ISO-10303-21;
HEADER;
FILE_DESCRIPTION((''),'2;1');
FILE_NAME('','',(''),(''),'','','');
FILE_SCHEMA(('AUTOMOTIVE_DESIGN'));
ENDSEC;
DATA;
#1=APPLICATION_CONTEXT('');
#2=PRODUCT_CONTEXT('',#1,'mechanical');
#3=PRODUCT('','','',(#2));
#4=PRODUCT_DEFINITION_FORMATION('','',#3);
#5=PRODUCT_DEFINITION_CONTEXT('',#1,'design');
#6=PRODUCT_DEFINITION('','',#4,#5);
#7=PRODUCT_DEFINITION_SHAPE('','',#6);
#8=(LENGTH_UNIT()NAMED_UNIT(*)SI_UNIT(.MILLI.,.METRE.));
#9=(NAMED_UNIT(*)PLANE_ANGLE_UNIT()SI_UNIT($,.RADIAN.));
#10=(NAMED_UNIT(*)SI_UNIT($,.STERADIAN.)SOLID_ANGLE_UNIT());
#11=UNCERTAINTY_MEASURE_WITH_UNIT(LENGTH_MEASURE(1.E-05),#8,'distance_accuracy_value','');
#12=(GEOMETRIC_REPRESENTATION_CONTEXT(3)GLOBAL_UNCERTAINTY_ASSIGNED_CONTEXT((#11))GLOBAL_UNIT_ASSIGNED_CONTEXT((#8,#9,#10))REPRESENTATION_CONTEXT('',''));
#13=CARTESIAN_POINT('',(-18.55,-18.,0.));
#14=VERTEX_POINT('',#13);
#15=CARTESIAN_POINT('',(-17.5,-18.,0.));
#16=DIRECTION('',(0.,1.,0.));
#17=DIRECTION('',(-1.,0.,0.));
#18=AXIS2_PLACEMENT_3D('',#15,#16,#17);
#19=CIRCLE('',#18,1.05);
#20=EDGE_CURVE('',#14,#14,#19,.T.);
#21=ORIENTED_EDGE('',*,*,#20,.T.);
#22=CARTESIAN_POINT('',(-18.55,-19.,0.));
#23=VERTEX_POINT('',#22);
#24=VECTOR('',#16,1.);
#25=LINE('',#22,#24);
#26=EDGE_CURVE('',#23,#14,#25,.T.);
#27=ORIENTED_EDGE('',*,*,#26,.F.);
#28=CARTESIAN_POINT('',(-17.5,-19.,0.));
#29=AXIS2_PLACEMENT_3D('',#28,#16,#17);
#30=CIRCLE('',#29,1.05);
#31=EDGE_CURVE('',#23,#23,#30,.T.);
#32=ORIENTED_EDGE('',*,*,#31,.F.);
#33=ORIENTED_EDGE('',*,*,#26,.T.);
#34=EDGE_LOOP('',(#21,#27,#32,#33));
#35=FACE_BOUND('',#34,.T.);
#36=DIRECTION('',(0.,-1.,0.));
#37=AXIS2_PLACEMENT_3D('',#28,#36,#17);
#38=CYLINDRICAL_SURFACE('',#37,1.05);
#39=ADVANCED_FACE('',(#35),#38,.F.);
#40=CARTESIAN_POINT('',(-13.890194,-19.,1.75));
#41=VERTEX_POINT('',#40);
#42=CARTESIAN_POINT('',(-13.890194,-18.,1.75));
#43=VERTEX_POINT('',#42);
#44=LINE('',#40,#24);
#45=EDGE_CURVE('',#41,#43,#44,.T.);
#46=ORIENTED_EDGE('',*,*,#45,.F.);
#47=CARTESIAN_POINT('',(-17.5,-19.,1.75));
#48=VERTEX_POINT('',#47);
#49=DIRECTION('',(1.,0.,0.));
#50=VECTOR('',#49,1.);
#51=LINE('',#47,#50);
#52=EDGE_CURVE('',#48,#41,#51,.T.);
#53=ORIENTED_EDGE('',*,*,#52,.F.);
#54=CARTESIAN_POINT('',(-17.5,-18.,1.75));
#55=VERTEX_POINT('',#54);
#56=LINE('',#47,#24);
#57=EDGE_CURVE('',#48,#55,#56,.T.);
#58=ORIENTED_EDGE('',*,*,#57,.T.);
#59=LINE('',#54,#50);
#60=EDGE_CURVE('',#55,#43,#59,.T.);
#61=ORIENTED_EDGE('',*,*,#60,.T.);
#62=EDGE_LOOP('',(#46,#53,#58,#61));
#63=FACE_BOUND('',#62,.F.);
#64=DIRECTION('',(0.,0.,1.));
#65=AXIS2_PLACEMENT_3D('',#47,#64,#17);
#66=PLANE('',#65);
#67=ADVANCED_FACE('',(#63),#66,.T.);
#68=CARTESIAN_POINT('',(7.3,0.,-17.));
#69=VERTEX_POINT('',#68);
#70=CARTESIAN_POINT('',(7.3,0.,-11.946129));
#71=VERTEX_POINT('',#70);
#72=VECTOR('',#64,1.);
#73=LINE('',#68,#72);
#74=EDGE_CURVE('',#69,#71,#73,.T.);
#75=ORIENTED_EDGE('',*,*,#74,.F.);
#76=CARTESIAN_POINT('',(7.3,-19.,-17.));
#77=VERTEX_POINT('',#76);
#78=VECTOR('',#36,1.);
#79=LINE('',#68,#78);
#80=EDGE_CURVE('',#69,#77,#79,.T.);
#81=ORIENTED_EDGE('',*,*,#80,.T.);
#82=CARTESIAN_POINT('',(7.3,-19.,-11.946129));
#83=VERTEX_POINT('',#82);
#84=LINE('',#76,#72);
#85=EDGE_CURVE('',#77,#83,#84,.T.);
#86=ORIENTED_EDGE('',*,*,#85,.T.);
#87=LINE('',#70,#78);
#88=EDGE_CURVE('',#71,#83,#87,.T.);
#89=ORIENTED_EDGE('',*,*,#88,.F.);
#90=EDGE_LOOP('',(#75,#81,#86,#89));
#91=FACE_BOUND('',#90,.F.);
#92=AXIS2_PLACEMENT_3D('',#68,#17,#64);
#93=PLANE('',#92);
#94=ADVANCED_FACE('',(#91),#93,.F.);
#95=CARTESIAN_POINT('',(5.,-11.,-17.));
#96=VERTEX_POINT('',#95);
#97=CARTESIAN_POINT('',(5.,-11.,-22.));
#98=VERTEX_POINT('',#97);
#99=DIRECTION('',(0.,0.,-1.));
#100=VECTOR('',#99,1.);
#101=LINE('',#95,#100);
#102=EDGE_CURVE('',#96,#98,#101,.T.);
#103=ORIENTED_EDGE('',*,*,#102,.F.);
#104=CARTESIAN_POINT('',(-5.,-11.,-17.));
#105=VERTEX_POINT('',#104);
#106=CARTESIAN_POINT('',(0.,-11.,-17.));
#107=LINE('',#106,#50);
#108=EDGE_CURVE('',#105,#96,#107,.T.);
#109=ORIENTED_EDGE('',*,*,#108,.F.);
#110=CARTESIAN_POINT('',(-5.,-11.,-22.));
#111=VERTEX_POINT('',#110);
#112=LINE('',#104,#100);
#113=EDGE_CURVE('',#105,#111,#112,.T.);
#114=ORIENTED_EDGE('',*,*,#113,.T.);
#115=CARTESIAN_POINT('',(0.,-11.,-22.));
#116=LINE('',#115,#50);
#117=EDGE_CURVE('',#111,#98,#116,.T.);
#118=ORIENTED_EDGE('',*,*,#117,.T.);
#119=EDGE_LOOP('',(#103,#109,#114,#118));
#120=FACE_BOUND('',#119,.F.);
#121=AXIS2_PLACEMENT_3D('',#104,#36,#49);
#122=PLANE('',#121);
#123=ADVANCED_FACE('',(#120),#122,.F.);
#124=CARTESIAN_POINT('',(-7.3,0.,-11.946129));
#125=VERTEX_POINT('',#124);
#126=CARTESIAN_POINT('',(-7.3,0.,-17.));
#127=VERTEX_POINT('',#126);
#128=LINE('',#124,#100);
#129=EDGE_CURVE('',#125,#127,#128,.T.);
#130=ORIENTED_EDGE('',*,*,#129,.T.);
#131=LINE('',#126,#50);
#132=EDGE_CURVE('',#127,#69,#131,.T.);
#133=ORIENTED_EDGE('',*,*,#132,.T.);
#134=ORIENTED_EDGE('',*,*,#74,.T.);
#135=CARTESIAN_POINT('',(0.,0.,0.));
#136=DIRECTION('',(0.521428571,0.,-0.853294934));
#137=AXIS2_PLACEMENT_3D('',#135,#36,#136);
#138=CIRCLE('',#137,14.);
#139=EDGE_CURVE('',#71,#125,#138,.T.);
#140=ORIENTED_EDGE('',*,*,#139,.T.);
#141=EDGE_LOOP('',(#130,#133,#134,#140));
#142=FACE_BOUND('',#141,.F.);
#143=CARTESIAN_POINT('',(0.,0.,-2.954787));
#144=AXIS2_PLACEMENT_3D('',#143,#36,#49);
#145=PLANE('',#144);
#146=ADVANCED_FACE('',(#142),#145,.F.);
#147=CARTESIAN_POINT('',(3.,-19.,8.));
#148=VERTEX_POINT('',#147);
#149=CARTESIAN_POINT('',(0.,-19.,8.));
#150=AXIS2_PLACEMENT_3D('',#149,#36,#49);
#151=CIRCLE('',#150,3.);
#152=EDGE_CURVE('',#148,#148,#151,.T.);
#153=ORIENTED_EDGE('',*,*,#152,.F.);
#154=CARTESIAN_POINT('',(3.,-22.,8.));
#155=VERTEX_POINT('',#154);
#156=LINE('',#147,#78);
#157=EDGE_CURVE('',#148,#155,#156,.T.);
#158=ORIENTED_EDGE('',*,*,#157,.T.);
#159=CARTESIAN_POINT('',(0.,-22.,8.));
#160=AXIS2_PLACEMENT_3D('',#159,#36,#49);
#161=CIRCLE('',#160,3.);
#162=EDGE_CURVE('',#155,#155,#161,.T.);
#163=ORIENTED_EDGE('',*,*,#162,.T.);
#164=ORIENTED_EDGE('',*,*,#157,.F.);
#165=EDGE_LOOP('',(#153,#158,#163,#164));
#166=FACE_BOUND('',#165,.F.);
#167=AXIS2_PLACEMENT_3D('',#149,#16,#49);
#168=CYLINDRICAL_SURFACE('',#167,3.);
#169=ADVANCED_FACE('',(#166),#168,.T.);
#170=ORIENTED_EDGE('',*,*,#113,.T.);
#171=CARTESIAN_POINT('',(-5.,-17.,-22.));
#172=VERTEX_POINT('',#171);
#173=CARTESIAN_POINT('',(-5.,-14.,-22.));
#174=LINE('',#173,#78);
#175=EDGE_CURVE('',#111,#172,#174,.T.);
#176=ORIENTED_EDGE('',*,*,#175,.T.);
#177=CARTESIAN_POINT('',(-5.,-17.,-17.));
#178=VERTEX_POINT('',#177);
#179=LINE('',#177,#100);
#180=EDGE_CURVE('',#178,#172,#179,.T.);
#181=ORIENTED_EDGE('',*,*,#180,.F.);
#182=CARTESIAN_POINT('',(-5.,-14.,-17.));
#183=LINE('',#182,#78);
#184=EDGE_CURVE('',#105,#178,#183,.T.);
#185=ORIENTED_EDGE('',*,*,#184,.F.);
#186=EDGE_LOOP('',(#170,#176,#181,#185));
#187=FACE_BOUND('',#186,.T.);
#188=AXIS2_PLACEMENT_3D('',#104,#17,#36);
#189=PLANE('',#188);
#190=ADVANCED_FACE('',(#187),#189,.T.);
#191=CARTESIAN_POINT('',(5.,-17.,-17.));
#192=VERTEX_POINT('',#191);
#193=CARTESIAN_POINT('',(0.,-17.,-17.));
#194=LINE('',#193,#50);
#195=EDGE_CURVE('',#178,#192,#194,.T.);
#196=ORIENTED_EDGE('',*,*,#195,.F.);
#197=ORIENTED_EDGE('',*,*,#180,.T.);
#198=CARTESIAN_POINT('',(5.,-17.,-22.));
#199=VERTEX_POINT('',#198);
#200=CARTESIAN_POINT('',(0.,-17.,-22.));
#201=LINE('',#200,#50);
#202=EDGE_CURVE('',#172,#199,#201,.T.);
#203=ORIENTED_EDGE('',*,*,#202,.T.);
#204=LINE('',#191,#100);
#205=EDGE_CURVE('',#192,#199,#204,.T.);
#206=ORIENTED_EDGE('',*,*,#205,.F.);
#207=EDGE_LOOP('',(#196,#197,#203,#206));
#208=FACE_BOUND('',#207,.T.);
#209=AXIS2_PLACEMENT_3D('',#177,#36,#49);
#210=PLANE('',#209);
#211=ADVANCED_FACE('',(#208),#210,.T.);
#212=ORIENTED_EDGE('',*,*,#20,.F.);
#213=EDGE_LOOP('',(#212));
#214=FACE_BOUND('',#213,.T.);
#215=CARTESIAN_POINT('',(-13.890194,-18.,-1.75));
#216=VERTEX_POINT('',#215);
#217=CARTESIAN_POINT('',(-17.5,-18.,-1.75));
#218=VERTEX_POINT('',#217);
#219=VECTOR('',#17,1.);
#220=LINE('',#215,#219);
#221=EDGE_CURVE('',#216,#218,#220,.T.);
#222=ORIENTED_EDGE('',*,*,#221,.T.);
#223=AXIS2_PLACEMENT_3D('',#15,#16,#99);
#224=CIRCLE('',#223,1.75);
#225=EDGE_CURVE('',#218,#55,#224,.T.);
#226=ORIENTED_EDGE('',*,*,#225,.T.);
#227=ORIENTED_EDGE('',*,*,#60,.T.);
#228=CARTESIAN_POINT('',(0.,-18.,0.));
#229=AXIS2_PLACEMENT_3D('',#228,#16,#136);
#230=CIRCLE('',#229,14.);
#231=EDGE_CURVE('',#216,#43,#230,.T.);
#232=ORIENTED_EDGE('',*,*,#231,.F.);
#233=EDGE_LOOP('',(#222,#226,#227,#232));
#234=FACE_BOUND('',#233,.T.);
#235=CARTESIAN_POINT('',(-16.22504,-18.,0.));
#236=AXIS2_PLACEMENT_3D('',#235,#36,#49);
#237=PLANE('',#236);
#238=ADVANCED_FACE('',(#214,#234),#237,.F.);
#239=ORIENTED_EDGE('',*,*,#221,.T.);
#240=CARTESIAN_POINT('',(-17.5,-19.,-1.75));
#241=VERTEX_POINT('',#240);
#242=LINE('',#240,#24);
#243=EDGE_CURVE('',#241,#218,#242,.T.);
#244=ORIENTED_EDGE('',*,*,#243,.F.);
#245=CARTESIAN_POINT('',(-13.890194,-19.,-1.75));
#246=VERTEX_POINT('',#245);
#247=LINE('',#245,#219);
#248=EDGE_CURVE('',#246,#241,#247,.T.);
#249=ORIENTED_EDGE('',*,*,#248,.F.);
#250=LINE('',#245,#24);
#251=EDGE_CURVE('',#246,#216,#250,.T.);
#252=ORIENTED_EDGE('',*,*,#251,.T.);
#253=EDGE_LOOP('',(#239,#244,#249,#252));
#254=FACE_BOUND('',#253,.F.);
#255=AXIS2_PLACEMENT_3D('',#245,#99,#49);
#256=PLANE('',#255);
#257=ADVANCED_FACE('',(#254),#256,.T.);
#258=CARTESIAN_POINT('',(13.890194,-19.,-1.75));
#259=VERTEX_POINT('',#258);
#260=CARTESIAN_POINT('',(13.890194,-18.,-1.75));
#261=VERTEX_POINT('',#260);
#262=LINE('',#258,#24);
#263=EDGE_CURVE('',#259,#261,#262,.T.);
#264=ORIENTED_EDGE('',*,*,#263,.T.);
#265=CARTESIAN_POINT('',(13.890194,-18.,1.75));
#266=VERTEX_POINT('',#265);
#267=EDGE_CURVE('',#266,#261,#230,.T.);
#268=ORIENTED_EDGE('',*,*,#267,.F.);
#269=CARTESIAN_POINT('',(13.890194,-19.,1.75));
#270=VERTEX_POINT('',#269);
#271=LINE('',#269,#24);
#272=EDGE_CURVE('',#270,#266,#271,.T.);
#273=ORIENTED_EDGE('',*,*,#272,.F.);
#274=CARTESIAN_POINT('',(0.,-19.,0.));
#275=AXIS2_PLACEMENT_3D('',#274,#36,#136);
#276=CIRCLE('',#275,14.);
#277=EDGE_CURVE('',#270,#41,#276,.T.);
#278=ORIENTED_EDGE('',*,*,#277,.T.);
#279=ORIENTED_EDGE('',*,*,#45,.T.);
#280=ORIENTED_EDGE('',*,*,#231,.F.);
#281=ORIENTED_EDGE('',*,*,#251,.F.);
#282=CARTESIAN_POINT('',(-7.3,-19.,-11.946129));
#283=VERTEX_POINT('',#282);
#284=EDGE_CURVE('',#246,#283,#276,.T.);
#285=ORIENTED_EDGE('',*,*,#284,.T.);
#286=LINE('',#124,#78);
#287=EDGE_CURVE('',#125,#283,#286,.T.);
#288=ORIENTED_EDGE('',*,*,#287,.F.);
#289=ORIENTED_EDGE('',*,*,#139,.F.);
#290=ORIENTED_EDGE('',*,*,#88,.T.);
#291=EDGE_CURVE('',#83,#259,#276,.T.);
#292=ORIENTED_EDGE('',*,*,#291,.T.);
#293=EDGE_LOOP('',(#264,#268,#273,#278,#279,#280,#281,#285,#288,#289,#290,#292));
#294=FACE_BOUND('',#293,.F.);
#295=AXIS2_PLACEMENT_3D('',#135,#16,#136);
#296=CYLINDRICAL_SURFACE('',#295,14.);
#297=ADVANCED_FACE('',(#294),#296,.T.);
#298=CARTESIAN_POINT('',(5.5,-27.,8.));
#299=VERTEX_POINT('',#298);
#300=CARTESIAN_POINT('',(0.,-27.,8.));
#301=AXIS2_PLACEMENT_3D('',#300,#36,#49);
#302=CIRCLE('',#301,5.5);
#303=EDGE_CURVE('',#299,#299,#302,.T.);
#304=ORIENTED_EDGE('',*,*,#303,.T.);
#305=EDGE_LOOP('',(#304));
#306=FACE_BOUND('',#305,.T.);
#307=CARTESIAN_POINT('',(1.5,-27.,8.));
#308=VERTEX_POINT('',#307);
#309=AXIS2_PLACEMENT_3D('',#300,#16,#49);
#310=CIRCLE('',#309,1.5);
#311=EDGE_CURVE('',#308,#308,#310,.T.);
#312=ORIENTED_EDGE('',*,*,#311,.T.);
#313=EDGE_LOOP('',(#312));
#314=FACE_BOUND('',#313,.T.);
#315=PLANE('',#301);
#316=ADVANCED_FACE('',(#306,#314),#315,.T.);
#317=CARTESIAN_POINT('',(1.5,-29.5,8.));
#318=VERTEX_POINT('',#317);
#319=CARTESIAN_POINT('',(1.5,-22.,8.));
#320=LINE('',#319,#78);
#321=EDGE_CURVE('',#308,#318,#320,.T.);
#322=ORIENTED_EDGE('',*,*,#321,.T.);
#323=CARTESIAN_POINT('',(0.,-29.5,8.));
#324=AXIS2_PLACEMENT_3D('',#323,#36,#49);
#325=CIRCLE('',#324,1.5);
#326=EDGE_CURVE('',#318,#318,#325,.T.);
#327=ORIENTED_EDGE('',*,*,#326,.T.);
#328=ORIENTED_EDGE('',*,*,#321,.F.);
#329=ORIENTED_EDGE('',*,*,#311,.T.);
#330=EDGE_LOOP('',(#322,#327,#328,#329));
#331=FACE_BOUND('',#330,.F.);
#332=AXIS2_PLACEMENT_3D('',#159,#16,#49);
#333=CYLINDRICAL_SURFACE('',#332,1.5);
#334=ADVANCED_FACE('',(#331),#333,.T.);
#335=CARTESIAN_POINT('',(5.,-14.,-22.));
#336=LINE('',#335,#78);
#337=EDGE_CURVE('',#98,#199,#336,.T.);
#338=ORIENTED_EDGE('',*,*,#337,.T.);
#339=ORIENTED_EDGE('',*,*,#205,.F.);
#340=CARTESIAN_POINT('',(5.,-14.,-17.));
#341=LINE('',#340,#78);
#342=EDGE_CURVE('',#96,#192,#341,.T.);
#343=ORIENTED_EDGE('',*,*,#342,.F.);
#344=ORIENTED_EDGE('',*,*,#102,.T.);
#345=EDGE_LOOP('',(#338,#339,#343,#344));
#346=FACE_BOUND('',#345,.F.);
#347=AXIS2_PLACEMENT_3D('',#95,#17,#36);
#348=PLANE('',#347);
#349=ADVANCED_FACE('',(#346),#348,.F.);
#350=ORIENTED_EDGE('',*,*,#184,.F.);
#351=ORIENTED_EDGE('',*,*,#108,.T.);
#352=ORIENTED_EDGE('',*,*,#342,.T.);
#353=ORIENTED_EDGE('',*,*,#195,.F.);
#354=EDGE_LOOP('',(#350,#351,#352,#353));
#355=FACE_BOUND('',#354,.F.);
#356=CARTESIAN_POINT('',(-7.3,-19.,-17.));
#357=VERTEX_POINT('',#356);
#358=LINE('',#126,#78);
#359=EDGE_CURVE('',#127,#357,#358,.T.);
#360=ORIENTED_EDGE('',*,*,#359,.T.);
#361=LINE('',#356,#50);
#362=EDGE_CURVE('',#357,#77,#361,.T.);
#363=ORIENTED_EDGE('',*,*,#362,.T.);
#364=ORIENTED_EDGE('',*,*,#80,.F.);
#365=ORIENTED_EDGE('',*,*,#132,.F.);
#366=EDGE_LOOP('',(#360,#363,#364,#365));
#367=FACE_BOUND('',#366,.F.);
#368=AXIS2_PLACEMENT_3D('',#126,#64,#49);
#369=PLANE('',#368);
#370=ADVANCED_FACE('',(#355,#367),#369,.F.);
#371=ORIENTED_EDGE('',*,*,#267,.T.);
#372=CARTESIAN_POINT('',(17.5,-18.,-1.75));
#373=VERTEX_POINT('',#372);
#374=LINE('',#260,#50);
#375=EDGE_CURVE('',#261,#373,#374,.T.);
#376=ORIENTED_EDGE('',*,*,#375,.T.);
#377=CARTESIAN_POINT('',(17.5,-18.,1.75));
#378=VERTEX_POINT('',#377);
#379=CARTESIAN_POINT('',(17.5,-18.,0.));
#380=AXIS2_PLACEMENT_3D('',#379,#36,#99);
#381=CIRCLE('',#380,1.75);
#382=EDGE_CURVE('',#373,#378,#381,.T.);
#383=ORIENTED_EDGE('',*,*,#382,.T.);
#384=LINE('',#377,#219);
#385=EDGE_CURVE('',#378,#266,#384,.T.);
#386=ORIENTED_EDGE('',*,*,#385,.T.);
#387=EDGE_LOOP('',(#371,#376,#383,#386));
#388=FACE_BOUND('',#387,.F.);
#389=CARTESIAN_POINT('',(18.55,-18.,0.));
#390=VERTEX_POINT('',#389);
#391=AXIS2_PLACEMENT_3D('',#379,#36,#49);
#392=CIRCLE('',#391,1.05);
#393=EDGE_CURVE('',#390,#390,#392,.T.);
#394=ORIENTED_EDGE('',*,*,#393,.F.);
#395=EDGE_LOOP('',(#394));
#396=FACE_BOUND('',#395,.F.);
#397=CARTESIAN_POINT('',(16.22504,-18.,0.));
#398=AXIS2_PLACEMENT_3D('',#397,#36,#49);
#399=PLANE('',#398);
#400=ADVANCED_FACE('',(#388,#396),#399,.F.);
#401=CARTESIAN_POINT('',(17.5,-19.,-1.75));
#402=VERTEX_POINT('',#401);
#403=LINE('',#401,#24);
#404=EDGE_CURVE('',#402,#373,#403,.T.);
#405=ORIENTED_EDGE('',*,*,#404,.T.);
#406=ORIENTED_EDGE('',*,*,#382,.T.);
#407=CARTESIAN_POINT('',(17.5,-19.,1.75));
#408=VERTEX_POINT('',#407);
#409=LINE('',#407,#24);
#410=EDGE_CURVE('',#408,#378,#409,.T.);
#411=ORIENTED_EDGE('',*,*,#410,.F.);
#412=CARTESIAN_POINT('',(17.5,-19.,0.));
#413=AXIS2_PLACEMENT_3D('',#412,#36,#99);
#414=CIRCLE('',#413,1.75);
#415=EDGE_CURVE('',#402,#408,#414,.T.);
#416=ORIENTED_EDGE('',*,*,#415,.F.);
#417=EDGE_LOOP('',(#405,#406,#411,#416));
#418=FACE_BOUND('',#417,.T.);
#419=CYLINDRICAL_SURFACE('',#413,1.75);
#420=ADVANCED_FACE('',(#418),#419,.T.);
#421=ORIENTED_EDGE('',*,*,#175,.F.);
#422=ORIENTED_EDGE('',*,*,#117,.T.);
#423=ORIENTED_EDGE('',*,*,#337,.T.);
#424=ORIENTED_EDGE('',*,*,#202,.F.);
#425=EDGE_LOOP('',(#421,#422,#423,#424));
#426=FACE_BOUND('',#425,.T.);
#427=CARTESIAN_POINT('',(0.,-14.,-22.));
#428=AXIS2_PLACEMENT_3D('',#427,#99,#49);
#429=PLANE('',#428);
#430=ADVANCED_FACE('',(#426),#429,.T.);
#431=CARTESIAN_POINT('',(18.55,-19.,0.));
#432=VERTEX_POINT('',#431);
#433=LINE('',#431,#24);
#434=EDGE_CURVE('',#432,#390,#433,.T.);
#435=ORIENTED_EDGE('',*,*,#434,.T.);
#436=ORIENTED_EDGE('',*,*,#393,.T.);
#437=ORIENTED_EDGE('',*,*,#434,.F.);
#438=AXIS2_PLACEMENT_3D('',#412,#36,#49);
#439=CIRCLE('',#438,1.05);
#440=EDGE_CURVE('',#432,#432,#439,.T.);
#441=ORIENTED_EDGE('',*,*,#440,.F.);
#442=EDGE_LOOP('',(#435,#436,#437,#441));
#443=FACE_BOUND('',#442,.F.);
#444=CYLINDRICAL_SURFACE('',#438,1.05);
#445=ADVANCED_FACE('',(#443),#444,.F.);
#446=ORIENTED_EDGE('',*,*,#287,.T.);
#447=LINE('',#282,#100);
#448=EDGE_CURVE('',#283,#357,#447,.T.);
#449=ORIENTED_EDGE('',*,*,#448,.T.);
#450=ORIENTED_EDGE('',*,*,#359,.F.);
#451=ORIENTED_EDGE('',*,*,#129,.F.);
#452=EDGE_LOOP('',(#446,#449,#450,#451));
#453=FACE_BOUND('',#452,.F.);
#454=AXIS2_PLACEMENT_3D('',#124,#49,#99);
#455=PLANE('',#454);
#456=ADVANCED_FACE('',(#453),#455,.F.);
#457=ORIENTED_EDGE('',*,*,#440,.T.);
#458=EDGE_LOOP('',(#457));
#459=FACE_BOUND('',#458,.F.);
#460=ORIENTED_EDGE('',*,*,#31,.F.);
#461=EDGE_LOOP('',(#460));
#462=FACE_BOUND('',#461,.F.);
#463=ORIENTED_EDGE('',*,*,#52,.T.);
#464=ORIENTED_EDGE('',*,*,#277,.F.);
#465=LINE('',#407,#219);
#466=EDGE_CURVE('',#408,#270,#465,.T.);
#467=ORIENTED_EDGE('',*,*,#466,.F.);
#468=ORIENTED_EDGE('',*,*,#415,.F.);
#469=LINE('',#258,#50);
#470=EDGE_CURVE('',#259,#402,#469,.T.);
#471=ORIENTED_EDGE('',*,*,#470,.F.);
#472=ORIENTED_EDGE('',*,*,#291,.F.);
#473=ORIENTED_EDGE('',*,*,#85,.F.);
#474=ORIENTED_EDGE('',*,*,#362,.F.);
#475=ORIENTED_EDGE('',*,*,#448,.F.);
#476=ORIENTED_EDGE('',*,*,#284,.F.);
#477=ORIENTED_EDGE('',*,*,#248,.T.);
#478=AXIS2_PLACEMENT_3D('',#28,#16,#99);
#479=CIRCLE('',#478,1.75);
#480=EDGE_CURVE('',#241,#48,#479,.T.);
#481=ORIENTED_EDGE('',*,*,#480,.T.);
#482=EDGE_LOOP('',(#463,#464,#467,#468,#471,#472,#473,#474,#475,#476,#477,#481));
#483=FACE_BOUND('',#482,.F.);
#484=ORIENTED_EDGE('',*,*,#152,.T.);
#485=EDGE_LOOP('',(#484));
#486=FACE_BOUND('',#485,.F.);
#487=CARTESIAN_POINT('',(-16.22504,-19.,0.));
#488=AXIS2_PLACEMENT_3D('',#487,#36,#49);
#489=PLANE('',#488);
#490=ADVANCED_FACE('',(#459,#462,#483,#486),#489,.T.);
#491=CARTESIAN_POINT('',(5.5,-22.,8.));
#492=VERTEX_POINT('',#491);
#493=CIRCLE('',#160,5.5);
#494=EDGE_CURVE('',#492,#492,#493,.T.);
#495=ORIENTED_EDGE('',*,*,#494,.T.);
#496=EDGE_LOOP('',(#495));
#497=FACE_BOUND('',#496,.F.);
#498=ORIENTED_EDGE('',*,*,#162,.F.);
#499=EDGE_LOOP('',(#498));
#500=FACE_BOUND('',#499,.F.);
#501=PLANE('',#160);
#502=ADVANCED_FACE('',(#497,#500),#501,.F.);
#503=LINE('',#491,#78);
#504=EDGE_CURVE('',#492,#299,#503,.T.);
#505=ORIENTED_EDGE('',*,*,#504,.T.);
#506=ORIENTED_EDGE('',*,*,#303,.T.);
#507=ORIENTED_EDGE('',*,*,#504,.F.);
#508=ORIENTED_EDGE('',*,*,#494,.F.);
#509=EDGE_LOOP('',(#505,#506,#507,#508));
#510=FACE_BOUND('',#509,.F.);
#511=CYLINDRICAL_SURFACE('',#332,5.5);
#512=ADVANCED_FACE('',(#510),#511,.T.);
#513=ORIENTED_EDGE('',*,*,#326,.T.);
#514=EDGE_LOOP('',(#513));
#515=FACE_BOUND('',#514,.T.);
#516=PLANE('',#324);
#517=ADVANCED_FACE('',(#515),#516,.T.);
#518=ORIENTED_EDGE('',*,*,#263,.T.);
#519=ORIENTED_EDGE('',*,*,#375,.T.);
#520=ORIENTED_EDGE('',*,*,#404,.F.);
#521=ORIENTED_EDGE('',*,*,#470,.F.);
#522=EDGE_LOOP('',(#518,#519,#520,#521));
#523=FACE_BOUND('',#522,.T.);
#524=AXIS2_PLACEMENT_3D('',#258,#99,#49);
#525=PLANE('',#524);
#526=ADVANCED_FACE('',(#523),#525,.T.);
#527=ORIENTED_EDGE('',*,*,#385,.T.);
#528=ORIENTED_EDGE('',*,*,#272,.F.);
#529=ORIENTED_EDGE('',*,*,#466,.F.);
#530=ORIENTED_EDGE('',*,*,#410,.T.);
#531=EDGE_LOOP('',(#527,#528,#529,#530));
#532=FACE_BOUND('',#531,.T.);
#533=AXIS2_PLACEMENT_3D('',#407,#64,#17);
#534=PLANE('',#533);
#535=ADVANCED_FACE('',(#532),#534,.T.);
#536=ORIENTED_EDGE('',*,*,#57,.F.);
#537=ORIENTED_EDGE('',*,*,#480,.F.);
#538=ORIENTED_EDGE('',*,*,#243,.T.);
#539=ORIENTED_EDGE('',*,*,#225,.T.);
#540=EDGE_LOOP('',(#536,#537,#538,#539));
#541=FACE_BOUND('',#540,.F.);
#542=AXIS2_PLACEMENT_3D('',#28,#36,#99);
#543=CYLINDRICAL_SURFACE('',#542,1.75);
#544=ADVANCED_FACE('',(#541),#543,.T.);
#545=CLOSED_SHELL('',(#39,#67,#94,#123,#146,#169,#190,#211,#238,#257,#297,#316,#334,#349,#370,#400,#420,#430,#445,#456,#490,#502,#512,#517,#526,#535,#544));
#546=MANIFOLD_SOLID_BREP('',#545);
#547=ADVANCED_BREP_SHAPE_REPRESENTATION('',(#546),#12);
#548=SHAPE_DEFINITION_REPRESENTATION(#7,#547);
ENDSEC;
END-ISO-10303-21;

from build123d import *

# Parameters (mm, degrees)
F1_DEPTH  = 19
F2_R      = 3
F3_DEPTH  = 3
F4_R      = 1.5
F5_DEPTH  = 7.5
F6_R      = 1.05
F7_DEPTH  = 1
F8_R      = 5.5
F9_DEPTH  = 5
F10_W     = 10
F10_H     = 6
F11_DEPTH = 5


# Not quite as in the source:
# - a pattern or mirror of a feature is missing from the dataset's text; its kind, count and spacing are read off the source's solid


with BuildPart() as f1:
    # F0 (on Front) → F1 (new body)
    with BuildSketch(Plane.XZ):
        with BuildLine():
            Line((7.3, -17), (7.3, -11.9461290802))
            ThreePointArc((7.3, -11.9461290802), (0, 14), (-7.3, -11.9461290802))
            Line((-7.3, -11.9461290802), (-7.3, -17))
            Line((-7.3, -17), (7.3, -17))
        make_face()
    extrude(amount=F1_DEPTH)

    # F2 (on face) → F3 (join)
    with BuildSketch(Plane.XZ.offset(19)):
        with Locations((0, 8)):
            Circle(F2_R)
    extrude(amount=F3_DEPTH)

    # F4 (on face) → F5 (join)
    with BuildSketch(Plane.XZ.offset(22)):
        with Locations((0, 8)):
            Circle(F4_R)
    extrude(amount=F5_DEPTH)

    # F6 (on face) → F7 (join)
    with BuildSketch(Plane.XZ.offset(19)):
        with BuildLine():
            Line((13.8901943831, -1.75), (17.5, -1.75))
            ThreePointArc((17.5, -1.75), (19.25, 0), (17.5, 1.75))
            Line((17.5, 1.75), (13.8901943831, 1.75))
            Line((13.8901943831, 1.75), (13.8901943831, -1.75))
        make_face()
        with Locations((17.5, 0)):
            Circle(F6_R, mode=Mode.SUBTRACT)
    f7 = extrude(amount=-F7_DEPTH)

    # F7_copies: F7 across plane
    add(f7.mirror(Plane(origin=(0, 0, 0), x_dir=(0, 0, -1), z_dir=(-1, 0, 0))))

    # F8 (on face) → F9 (join)
    with BuildSketch(Plane.XZ.offset(22)):
        with Locations((0, 8)):
            Circle(F8_R)
    extrude(amount=F9_DEPTH)

    # F10 (on face) → F11 (join)
    with BuildSketch(Plane(origin=(0, 0, -17), x_dir=(1, 0, 0), z_dir=(0, 0, -1))):
        with Locations((0, 14)):
            Rectangle(F10_W, F10_H)
    extrude(amount=F11_DEPTH)


solid = f1.part
